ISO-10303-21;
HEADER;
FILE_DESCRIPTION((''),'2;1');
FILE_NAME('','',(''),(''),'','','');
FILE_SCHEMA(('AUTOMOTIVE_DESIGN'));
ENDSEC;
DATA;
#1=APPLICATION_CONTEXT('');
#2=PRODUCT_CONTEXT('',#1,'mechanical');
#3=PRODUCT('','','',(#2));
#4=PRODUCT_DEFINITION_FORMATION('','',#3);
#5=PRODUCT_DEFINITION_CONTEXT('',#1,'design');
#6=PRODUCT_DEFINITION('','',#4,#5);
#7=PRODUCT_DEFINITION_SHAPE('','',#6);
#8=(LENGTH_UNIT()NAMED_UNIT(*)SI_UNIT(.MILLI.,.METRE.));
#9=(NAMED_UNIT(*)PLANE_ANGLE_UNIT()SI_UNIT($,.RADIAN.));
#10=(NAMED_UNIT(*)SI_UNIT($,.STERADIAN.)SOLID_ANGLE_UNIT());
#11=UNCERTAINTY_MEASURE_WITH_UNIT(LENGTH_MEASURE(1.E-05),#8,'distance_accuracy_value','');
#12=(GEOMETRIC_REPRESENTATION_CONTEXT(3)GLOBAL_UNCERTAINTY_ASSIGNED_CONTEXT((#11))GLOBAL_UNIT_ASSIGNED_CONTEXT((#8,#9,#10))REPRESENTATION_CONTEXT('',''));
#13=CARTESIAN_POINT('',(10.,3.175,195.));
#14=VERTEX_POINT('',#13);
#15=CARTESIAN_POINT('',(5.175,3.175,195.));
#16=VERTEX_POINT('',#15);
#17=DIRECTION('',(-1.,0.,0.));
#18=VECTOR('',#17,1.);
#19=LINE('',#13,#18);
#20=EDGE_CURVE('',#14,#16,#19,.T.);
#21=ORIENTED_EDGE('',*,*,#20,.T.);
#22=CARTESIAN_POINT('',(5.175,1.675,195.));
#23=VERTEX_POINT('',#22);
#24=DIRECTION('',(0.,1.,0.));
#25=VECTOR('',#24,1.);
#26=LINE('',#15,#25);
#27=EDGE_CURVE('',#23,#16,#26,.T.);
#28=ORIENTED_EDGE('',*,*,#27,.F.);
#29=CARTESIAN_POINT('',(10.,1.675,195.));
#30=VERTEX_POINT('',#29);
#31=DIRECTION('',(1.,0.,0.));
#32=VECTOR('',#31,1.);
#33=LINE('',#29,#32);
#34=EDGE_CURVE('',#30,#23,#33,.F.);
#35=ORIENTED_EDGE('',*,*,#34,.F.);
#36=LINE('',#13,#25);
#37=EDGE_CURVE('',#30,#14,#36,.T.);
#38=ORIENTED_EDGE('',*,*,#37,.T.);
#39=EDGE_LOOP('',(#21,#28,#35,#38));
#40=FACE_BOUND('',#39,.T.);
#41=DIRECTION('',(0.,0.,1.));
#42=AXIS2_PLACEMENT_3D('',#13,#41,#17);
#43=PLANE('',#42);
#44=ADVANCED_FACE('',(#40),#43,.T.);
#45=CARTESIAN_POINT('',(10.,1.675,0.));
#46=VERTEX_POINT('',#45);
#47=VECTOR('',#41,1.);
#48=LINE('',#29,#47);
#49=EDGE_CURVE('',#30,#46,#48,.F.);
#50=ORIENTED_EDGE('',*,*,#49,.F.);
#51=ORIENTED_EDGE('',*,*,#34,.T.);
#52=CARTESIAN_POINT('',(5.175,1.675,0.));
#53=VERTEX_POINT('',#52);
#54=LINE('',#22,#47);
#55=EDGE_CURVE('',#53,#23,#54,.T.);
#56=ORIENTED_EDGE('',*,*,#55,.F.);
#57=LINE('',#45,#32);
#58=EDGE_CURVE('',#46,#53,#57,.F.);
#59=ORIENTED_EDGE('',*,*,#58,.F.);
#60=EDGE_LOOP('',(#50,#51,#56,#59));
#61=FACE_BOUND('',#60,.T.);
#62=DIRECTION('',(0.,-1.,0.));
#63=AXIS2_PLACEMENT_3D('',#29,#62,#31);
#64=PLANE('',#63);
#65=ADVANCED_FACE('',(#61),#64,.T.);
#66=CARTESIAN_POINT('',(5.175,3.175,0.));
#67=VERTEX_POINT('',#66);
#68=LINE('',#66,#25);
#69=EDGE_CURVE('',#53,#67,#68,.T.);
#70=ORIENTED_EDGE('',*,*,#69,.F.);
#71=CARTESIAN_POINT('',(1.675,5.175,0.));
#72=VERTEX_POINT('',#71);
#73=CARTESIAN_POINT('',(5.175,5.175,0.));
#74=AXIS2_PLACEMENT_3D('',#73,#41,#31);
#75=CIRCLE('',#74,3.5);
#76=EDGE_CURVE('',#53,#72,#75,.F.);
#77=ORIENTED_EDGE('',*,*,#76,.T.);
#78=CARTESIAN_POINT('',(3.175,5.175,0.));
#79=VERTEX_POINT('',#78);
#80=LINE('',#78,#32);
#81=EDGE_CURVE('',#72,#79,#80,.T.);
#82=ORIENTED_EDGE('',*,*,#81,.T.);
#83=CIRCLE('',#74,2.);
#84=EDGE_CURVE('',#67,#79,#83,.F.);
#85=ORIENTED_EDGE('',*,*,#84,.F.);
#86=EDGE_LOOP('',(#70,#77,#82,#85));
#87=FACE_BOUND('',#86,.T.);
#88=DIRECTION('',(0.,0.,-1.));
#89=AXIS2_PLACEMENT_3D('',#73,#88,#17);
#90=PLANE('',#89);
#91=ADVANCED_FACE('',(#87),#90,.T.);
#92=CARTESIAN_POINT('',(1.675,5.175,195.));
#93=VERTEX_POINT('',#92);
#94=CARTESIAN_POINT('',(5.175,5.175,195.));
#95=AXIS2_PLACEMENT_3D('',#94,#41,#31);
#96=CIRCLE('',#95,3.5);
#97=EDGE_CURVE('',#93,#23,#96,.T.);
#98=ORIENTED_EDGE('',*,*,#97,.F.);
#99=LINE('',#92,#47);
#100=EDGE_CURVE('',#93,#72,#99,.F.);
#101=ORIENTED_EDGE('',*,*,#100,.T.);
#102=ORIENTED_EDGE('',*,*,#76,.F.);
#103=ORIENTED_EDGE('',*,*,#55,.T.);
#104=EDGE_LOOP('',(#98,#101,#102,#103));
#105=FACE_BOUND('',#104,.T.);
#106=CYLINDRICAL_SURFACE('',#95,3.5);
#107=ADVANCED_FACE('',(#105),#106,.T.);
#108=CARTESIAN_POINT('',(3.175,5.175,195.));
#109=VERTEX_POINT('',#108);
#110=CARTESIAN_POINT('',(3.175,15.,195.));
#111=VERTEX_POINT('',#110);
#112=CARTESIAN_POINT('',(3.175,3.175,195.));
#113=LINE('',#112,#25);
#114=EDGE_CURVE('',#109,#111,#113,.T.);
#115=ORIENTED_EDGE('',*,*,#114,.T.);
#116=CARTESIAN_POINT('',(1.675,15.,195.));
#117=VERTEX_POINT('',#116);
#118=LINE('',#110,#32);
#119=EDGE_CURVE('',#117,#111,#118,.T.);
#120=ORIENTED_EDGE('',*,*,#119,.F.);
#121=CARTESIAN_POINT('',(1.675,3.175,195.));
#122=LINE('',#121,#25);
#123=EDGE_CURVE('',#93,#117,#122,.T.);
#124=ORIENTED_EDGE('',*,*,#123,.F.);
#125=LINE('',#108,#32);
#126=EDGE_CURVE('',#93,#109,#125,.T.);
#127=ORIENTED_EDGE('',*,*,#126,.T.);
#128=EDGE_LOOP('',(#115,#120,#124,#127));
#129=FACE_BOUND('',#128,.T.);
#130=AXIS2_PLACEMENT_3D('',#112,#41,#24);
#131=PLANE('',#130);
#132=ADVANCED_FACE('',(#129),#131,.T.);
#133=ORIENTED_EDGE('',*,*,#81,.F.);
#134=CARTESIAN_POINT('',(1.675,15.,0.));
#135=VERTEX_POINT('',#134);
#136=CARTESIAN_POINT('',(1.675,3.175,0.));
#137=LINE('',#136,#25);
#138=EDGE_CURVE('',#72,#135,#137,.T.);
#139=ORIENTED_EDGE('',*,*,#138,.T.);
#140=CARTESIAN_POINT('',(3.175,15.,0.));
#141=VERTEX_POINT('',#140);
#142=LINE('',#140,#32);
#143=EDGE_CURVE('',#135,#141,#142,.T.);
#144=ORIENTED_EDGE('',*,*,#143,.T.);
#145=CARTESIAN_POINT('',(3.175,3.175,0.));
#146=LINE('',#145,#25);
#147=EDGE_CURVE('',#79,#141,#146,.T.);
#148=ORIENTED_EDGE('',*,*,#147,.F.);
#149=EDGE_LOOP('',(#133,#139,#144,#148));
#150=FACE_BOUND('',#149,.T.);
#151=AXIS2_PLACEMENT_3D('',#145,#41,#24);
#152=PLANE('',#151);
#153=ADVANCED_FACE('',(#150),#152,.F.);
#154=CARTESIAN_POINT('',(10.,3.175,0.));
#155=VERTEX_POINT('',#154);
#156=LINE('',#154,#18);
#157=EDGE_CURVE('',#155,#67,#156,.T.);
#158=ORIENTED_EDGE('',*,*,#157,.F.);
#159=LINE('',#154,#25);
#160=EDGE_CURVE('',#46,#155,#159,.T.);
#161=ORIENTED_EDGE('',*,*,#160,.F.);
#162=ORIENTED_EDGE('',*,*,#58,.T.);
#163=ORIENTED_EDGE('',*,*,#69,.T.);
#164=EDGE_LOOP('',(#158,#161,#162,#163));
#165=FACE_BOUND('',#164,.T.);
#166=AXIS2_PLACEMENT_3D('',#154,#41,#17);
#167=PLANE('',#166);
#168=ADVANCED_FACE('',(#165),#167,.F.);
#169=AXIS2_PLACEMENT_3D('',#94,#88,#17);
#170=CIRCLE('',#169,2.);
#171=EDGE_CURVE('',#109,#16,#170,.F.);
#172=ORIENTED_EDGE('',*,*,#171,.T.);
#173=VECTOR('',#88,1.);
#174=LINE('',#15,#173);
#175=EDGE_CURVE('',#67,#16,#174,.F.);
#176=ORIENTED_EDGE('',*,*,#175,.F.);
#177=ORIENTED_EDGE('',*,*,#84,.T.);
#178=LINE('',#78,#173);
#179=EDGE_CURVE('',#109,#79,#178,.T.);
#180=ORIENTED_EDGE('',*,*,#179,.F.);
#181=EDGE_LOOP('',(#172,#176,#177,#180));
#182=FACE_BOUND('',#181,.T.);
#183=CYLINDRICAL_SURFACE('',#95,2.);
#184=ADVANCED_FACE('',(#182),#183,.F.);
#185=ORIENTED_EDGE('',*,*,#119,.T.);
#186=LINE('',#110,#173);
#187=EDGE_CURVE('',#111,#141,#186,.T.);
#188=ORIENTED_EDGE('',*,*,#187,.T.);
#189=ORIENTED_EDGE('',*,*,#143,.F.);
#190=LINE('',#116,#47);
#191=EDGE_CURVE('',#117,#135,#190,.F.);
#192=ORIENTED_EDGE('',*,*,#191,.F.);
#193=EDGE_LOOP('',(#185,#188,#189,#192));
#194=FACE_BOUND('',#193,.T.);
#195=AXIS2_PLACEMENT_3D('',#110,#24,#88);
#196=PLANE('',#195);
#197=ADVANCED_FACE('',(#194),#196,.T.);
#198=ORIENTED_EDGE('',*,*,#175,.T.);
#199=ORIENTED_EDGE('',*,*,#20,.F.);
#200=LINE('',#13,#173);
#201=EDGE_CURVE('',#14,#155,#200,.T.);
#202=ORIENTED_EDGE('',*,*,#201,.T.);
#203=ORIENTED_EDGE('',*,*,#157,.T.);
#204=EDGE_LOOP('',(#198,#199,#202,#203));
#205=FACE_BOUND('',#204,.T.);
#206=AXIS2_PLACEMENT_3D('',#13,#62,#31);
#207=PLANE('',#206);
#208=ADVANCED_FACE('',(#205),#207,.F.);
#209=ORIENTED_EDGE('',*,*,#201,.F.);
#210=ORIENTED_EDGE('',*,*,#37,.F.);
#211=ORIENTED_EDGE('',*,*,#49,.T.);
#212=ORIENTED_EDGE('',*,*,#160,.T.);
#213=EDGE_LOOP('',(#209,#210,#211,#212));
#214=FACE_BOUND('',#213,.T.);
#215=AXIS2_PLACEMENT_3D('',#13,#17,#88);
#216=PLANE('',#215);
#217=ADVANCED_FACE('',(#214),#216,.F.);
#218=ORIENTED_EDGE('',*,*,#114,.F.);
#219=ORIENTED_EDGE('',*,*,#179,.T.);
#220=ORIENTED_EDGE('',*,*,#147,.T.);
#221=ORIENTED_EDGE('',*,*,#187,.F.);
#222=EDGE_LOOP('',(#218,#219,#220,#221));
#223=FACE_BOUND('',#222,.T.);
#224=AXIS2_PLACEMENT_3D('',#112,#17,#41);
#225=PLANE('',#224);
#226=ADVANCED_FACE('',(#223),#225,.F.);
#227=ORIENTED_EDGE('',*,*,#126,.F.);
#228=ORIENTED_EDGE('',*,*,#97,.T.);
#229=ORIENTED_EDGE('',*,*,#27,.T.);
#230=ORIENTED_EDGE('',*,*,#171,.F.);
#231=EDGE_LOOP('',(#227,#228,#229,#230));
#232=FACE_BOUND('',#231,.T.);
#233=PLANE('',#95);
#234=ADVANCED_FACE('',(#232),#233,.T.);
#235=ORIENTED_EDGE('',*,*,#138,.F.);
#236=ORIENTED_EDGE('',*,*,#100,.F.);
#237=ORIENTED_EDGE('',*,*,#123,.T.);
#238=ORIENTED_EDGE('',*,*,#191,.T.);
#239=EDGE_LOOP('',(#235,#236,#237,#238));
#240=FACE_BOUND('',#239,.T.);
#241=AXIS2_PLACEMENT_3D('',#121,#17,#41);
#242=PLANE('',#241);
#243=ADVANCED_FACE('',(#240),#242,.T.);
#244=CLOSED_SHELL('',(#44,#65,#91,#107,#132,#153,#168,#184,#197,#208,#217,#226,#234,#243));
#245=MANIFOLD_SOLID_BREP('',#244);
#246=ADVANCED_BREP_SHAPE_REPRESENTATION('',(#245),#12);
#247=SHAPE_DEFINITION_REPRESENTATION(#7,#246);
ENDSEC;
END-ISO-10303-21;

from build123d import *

# Parameters (mm, degrees)
BOSS_EXTRUDE1_DEPTH    = 195
CONVERT_SOLID1_DEPTH   = 195
CONVERT_SOLID1_2_DEPTH = 195


# Read off the part's stored shape, not the designer's step: Convert-Solid1
with BuildPart() as part:
    # Sketch1 → Boss-Extrude1 (new body)
    with BuildSketch(Plane.XY):
        Polygon((0, 15), (0, 0), (10, 0), (10, 3.175), (3.175, 3.175), (3.175, 15), align=None)
    extrude(amount=BOSS_EXTRUDE1_DEPTH)

    # Convert-Solid1 outline → Convert-Solid1 (cut)
    with BuildSketch(Plane.XY):
        with BuildLine():
            Line((1.675, 5.175), (1.675, 15))
            Line((1.675, 15), (0, 15))
            Line((0, 15), (0, 0))
            Line((0, 0), (10, 0))
            Line((10, 0), (10, 1.675))
            Line((10, 1.675), (5.175, 1.675))
            ThreePointArc((5.175, 1.675), (2.700126266, 2.700126266), (1.675, 5.175))
        make_face()
    extrude(amount=CONVERT_SOLID1_DEPTH, mode=Mode.SUBTRACT)

    # Convert-Solid1 2 outline → Convert-Solid1 2 (add)
    with BuildSketch(Plane.XY):
        with BuildLine():
            ThreePointArc((5.175, 3.175), (3.760786438, 3.760786438), (3.175, 5.175))
            Line((3.175, 5.175), (3.175, 3.175))
            Line((3.175, 3.175), (5.175, 3.175))
        make_face()
    extrude(amount=CONVERT_SOLID1_2_DEPTH)


solid = part.part
